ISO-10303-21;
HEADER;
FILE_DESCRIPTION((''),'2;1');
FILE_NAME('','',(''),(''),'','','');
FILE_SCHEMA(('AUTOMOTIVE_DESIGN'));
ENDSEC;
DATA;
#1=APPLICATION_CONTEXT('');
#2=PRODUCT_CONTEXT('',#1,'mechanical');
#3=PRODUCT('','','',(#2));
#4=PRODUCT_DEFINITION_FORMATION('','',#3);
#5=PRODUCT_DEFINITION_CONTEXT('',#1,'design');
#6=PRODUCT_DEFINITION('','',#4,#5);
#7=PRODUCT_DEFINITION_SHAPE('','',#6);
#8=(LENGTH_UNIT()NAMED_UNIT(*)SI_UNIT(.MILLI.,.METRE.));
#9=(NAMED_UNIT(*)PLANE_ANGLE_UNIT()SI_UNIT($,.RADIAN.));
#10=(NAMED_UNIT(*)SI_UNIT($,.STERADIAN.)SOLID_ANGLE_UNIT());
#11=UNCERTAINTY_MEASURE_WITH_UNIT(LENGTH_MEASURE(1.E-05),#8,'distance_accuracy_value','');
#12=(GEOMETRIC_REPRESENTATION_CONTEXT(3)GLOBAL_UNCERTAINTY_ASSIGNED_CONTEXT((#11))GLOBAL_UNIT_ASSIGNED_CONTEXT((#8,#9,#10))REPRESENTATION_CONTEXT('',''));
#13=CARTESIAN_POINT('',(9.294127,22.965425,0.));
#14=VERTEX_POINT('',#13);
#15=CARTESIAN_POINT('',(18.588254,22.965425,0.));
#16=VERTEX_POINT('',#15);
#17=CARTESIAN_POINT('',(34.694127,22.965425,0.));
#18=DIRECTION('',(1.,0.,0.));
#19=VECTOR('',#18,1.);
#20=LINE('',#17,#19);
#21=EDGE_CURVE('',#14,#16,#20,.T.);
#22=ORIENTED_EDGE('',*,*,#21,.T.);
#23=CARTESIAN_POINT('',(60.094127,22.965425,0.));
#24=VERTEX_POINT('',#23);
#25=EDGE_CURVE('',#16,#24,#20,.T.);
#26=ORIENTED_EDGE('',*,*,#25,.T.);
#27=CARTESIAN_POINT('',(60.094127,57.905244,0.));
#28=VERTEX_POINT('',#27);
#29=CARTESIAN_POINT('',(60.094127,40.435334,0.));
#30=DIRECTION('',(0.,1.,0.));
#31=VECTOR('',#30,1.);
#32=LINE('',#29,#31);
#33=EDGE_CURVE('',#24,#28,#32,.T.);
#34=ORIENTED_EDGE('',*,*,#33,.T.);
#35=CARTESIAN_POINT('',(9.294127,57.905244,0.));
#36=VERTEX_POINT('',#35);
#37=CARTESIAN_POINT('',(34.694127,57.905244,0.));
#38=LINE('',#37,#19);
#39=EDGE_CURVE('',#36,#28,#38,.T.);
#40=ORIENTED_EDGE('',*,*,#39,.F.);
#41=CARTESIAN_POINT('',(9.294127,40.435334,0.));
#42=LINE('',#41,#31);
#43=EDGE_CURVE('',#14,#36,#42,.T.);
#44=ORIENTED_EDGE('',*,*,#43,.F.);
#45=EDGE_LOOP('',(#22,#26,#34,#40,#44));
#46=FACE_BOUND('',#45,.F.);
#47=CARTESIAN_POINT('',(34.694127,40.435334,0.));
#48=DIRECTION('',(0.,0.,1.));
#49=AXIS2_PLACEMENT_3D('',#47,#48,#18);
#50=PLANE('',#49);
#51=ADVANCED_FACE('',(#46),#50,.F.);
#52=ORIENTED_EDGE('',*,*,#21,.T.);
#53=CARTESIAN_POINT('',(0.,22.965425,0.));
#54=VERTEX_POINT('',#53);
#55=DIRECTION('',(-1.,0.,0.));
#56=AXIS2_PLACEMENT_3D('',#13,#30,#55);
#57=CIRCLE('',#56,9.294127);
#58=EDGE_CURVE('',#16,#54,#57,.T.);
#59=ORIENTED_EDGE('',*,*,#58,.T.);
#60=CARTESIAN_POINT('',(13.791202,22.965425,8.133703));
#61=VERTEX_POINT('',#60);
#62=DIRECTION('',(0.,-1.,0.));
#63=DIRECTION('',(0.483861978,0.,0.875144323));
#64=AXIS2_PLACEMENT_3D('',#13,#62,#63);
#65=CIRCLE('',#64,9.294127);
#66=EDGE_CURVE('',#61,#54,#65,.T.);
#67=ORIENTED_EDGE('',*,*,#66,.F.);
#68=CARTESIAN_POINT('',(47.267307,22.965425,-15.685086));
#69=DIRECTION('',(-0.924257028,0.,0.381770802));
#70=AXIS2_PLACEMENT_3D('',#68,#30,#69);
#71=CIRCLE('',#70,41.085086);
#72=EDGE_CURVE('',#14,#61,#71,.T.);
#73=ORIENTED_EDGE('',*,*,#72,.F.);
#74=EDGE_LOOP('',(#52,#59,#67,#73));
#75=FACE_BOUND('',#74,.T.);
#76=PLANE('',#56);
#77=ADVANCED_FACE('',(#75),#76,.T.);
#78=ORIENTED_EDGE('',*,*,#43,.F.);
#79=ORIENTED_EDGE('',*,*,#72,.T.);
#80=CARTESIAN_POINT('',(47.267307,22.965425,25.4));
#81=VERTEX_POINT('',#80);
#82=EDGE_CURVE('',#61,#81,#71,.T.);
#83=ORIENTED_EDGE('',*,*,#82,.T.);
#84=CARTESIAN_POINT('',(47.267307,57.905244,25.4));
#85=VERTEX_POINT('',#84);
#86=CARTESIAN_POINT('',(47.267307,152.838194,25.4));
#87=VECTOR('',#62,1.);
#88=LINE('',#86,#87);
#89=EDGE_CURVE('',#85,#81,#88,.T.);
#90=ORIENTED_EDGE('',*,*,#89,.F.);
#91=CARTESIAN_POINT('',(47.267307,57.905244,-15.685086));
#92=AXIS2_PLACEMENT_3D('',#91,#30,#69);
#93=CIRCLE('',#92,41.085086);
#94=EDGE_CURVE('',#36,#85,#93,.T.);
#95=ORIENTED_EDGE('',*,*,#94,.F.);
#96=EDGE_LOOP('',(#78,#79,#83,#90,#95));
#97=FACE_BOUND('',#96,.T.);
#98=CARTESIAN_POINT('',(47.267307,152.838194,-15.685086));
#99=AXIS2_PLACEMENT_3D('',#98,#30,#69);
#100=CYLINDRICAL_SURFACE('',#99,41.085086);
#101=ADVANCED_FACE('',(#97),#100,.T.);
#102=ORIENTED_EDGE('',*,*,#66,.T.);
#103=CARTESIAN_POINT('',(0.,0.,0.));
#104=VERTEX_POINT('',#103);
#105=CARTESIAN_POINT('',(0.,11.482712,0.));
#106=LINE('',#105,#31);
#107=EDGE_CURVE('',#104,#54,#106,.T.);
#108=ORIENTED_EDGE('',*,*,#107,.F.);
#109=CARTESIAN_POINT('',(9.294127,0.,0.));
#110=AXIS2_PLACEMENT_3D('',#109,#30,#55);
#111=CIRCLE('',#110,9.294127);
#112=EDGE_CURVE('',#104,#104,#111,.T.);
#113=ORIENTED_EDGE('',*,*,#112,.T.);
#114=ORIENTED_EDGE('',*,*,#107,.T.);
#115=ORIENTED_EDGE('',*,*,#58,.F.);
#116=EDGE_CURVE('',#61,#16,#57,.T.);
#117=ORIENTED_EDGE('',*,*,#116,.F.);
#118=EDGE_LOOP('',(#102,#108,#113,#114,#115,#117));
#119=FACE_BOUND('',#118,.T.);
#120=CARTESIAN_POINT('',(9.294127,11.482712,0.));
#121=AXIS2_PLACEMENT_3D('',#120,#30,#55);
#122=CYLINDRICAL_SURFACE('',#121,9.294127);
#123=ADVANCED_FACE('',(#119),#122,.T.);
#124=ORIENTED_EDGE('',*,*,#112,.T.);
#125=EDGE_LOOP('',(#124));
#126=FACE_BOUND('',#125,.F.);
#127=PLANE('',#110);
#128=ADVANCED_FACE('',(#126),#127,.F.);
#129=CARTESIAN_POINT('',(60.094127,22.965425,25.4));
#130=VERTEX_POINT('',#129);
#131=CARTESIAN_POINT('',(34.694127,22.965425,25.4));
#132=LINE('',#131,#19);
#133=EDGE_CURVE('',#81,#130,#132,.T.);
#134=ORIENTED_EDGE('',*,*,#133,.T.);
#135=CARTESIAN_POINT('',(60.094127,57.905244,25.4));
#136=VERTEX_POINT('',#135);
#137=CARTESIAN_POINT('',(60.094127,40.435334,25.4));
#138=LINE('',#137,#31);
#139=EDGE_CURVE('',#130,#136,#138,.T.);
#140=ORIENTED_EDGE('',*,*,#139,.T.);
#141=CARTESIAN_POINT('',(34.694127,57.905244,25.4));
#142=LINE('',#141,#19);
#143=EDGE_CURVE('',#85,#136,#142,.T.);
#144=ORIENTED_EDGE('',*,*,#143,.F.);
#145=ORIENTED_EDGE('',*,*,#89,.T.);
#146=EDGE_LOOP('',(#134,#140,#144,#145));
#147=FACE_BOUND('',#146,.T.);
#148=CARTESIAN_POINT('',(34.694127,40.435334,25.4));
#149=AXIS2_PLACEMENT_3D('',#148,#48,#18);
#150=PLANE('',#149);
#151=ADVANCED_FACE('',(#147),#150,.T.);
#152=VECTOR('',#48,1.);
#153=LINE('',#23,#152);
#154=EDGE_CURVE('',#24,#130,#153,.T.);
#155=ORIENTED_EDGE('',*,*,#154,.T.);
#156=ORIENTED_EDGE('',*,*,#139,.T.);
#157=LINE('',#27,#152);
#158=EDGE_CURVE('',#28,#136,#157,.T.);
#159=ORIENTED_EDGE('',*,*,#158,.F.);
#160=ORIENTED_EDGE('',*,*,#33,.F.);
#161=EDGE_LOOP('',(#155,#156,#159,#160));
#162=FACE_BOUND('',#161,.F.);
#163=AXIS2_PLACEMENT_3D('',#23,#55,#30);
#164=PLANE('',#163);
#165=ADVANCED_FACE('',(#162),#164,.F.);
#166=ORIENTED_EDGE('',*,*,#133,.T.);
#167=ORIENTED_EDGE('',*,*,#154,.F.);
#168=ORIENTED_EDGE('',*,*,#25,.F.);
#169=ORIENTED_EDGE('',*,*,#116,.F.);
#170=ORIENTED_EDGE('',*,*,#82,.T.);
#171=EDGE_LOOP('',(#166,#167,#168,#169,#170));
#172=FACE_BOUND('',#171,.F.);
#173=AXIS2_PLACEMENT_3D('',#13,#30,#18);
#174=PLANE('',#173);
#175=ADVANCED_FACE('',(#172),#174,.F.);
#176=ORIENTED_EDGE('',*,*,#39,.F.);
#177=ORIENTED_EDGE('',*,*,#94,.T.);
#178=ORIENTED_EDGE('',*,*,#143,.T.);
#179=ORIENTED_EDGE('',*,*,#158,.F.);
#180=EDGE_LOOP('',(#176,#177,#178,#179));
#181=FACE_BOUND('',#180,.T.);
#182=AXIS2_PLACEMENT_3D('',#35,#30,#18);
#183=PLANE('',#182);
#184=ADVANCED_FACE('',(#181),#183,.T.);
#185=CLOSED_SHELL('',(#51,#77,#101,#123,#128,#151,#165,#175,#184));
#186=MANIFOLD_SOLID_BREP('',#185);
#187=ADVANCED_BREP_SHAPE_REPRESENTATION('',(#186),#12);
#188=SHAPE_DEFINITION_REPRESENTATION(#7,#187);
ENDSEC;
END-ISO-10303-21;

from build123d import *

# Parameters (mm, degrees)
F0_W        = 50.8
F0_H        = 34.9398194141
F1_DEPTH    = 25.4
F0_W_2      = 9.2941272077
F0_H_2      = 22.9654247603
F3_T1_DEPTH = 129.872769086


# Not quite as in the source:
# - a fillet or chamfer that OpenCascade refuses, or shapes differently, is made with other operations: its cross-section is extruded or revolved along the edge and cut away or added


with BuildPart() as f1:
    # F0 (on Top) → F1 (new body)
    with BuildSketch(Plane.XY):
        with Locations((34.6941272077, 40.4353344673)):
            Rectangle(F0_W, F0_H)
    extrude(amount=F1_DEPTH)

    # F0 (on Top) → F2 (revolve)
    with BuildSketch(Plane.XY):
        with Locations((4.6470636039, 11.4827123801)):
            Rectangle(F0_W_2, F0_H_2)
    revolve(axis=Axis((9.2941272077, 11.4827123801, 0), (0, 1, 0)))

    # F3: fillet of radius 41.0850864045 on 1 edges, made by hand

    # F3_s2 → F3_t1 (cut)
    with BuildSketch(Plane.XZ.offset(-152.8381938463)):
        with BuildLine():
            ThreePointArc((9.2941272077, 0), (24.4247897604, 18.4646387412), (47.2673070765, 25.4))
            Line((47.2673070765, 25.4), (9.2941272077, 25.4))
            Line((9.2941272077, 25.4), (9.2941272077, 0))
        make_face()
    extrude(amount=F3_T1_DEPTH, mode=Mode.SUBTRACT)


solid = f1.part
